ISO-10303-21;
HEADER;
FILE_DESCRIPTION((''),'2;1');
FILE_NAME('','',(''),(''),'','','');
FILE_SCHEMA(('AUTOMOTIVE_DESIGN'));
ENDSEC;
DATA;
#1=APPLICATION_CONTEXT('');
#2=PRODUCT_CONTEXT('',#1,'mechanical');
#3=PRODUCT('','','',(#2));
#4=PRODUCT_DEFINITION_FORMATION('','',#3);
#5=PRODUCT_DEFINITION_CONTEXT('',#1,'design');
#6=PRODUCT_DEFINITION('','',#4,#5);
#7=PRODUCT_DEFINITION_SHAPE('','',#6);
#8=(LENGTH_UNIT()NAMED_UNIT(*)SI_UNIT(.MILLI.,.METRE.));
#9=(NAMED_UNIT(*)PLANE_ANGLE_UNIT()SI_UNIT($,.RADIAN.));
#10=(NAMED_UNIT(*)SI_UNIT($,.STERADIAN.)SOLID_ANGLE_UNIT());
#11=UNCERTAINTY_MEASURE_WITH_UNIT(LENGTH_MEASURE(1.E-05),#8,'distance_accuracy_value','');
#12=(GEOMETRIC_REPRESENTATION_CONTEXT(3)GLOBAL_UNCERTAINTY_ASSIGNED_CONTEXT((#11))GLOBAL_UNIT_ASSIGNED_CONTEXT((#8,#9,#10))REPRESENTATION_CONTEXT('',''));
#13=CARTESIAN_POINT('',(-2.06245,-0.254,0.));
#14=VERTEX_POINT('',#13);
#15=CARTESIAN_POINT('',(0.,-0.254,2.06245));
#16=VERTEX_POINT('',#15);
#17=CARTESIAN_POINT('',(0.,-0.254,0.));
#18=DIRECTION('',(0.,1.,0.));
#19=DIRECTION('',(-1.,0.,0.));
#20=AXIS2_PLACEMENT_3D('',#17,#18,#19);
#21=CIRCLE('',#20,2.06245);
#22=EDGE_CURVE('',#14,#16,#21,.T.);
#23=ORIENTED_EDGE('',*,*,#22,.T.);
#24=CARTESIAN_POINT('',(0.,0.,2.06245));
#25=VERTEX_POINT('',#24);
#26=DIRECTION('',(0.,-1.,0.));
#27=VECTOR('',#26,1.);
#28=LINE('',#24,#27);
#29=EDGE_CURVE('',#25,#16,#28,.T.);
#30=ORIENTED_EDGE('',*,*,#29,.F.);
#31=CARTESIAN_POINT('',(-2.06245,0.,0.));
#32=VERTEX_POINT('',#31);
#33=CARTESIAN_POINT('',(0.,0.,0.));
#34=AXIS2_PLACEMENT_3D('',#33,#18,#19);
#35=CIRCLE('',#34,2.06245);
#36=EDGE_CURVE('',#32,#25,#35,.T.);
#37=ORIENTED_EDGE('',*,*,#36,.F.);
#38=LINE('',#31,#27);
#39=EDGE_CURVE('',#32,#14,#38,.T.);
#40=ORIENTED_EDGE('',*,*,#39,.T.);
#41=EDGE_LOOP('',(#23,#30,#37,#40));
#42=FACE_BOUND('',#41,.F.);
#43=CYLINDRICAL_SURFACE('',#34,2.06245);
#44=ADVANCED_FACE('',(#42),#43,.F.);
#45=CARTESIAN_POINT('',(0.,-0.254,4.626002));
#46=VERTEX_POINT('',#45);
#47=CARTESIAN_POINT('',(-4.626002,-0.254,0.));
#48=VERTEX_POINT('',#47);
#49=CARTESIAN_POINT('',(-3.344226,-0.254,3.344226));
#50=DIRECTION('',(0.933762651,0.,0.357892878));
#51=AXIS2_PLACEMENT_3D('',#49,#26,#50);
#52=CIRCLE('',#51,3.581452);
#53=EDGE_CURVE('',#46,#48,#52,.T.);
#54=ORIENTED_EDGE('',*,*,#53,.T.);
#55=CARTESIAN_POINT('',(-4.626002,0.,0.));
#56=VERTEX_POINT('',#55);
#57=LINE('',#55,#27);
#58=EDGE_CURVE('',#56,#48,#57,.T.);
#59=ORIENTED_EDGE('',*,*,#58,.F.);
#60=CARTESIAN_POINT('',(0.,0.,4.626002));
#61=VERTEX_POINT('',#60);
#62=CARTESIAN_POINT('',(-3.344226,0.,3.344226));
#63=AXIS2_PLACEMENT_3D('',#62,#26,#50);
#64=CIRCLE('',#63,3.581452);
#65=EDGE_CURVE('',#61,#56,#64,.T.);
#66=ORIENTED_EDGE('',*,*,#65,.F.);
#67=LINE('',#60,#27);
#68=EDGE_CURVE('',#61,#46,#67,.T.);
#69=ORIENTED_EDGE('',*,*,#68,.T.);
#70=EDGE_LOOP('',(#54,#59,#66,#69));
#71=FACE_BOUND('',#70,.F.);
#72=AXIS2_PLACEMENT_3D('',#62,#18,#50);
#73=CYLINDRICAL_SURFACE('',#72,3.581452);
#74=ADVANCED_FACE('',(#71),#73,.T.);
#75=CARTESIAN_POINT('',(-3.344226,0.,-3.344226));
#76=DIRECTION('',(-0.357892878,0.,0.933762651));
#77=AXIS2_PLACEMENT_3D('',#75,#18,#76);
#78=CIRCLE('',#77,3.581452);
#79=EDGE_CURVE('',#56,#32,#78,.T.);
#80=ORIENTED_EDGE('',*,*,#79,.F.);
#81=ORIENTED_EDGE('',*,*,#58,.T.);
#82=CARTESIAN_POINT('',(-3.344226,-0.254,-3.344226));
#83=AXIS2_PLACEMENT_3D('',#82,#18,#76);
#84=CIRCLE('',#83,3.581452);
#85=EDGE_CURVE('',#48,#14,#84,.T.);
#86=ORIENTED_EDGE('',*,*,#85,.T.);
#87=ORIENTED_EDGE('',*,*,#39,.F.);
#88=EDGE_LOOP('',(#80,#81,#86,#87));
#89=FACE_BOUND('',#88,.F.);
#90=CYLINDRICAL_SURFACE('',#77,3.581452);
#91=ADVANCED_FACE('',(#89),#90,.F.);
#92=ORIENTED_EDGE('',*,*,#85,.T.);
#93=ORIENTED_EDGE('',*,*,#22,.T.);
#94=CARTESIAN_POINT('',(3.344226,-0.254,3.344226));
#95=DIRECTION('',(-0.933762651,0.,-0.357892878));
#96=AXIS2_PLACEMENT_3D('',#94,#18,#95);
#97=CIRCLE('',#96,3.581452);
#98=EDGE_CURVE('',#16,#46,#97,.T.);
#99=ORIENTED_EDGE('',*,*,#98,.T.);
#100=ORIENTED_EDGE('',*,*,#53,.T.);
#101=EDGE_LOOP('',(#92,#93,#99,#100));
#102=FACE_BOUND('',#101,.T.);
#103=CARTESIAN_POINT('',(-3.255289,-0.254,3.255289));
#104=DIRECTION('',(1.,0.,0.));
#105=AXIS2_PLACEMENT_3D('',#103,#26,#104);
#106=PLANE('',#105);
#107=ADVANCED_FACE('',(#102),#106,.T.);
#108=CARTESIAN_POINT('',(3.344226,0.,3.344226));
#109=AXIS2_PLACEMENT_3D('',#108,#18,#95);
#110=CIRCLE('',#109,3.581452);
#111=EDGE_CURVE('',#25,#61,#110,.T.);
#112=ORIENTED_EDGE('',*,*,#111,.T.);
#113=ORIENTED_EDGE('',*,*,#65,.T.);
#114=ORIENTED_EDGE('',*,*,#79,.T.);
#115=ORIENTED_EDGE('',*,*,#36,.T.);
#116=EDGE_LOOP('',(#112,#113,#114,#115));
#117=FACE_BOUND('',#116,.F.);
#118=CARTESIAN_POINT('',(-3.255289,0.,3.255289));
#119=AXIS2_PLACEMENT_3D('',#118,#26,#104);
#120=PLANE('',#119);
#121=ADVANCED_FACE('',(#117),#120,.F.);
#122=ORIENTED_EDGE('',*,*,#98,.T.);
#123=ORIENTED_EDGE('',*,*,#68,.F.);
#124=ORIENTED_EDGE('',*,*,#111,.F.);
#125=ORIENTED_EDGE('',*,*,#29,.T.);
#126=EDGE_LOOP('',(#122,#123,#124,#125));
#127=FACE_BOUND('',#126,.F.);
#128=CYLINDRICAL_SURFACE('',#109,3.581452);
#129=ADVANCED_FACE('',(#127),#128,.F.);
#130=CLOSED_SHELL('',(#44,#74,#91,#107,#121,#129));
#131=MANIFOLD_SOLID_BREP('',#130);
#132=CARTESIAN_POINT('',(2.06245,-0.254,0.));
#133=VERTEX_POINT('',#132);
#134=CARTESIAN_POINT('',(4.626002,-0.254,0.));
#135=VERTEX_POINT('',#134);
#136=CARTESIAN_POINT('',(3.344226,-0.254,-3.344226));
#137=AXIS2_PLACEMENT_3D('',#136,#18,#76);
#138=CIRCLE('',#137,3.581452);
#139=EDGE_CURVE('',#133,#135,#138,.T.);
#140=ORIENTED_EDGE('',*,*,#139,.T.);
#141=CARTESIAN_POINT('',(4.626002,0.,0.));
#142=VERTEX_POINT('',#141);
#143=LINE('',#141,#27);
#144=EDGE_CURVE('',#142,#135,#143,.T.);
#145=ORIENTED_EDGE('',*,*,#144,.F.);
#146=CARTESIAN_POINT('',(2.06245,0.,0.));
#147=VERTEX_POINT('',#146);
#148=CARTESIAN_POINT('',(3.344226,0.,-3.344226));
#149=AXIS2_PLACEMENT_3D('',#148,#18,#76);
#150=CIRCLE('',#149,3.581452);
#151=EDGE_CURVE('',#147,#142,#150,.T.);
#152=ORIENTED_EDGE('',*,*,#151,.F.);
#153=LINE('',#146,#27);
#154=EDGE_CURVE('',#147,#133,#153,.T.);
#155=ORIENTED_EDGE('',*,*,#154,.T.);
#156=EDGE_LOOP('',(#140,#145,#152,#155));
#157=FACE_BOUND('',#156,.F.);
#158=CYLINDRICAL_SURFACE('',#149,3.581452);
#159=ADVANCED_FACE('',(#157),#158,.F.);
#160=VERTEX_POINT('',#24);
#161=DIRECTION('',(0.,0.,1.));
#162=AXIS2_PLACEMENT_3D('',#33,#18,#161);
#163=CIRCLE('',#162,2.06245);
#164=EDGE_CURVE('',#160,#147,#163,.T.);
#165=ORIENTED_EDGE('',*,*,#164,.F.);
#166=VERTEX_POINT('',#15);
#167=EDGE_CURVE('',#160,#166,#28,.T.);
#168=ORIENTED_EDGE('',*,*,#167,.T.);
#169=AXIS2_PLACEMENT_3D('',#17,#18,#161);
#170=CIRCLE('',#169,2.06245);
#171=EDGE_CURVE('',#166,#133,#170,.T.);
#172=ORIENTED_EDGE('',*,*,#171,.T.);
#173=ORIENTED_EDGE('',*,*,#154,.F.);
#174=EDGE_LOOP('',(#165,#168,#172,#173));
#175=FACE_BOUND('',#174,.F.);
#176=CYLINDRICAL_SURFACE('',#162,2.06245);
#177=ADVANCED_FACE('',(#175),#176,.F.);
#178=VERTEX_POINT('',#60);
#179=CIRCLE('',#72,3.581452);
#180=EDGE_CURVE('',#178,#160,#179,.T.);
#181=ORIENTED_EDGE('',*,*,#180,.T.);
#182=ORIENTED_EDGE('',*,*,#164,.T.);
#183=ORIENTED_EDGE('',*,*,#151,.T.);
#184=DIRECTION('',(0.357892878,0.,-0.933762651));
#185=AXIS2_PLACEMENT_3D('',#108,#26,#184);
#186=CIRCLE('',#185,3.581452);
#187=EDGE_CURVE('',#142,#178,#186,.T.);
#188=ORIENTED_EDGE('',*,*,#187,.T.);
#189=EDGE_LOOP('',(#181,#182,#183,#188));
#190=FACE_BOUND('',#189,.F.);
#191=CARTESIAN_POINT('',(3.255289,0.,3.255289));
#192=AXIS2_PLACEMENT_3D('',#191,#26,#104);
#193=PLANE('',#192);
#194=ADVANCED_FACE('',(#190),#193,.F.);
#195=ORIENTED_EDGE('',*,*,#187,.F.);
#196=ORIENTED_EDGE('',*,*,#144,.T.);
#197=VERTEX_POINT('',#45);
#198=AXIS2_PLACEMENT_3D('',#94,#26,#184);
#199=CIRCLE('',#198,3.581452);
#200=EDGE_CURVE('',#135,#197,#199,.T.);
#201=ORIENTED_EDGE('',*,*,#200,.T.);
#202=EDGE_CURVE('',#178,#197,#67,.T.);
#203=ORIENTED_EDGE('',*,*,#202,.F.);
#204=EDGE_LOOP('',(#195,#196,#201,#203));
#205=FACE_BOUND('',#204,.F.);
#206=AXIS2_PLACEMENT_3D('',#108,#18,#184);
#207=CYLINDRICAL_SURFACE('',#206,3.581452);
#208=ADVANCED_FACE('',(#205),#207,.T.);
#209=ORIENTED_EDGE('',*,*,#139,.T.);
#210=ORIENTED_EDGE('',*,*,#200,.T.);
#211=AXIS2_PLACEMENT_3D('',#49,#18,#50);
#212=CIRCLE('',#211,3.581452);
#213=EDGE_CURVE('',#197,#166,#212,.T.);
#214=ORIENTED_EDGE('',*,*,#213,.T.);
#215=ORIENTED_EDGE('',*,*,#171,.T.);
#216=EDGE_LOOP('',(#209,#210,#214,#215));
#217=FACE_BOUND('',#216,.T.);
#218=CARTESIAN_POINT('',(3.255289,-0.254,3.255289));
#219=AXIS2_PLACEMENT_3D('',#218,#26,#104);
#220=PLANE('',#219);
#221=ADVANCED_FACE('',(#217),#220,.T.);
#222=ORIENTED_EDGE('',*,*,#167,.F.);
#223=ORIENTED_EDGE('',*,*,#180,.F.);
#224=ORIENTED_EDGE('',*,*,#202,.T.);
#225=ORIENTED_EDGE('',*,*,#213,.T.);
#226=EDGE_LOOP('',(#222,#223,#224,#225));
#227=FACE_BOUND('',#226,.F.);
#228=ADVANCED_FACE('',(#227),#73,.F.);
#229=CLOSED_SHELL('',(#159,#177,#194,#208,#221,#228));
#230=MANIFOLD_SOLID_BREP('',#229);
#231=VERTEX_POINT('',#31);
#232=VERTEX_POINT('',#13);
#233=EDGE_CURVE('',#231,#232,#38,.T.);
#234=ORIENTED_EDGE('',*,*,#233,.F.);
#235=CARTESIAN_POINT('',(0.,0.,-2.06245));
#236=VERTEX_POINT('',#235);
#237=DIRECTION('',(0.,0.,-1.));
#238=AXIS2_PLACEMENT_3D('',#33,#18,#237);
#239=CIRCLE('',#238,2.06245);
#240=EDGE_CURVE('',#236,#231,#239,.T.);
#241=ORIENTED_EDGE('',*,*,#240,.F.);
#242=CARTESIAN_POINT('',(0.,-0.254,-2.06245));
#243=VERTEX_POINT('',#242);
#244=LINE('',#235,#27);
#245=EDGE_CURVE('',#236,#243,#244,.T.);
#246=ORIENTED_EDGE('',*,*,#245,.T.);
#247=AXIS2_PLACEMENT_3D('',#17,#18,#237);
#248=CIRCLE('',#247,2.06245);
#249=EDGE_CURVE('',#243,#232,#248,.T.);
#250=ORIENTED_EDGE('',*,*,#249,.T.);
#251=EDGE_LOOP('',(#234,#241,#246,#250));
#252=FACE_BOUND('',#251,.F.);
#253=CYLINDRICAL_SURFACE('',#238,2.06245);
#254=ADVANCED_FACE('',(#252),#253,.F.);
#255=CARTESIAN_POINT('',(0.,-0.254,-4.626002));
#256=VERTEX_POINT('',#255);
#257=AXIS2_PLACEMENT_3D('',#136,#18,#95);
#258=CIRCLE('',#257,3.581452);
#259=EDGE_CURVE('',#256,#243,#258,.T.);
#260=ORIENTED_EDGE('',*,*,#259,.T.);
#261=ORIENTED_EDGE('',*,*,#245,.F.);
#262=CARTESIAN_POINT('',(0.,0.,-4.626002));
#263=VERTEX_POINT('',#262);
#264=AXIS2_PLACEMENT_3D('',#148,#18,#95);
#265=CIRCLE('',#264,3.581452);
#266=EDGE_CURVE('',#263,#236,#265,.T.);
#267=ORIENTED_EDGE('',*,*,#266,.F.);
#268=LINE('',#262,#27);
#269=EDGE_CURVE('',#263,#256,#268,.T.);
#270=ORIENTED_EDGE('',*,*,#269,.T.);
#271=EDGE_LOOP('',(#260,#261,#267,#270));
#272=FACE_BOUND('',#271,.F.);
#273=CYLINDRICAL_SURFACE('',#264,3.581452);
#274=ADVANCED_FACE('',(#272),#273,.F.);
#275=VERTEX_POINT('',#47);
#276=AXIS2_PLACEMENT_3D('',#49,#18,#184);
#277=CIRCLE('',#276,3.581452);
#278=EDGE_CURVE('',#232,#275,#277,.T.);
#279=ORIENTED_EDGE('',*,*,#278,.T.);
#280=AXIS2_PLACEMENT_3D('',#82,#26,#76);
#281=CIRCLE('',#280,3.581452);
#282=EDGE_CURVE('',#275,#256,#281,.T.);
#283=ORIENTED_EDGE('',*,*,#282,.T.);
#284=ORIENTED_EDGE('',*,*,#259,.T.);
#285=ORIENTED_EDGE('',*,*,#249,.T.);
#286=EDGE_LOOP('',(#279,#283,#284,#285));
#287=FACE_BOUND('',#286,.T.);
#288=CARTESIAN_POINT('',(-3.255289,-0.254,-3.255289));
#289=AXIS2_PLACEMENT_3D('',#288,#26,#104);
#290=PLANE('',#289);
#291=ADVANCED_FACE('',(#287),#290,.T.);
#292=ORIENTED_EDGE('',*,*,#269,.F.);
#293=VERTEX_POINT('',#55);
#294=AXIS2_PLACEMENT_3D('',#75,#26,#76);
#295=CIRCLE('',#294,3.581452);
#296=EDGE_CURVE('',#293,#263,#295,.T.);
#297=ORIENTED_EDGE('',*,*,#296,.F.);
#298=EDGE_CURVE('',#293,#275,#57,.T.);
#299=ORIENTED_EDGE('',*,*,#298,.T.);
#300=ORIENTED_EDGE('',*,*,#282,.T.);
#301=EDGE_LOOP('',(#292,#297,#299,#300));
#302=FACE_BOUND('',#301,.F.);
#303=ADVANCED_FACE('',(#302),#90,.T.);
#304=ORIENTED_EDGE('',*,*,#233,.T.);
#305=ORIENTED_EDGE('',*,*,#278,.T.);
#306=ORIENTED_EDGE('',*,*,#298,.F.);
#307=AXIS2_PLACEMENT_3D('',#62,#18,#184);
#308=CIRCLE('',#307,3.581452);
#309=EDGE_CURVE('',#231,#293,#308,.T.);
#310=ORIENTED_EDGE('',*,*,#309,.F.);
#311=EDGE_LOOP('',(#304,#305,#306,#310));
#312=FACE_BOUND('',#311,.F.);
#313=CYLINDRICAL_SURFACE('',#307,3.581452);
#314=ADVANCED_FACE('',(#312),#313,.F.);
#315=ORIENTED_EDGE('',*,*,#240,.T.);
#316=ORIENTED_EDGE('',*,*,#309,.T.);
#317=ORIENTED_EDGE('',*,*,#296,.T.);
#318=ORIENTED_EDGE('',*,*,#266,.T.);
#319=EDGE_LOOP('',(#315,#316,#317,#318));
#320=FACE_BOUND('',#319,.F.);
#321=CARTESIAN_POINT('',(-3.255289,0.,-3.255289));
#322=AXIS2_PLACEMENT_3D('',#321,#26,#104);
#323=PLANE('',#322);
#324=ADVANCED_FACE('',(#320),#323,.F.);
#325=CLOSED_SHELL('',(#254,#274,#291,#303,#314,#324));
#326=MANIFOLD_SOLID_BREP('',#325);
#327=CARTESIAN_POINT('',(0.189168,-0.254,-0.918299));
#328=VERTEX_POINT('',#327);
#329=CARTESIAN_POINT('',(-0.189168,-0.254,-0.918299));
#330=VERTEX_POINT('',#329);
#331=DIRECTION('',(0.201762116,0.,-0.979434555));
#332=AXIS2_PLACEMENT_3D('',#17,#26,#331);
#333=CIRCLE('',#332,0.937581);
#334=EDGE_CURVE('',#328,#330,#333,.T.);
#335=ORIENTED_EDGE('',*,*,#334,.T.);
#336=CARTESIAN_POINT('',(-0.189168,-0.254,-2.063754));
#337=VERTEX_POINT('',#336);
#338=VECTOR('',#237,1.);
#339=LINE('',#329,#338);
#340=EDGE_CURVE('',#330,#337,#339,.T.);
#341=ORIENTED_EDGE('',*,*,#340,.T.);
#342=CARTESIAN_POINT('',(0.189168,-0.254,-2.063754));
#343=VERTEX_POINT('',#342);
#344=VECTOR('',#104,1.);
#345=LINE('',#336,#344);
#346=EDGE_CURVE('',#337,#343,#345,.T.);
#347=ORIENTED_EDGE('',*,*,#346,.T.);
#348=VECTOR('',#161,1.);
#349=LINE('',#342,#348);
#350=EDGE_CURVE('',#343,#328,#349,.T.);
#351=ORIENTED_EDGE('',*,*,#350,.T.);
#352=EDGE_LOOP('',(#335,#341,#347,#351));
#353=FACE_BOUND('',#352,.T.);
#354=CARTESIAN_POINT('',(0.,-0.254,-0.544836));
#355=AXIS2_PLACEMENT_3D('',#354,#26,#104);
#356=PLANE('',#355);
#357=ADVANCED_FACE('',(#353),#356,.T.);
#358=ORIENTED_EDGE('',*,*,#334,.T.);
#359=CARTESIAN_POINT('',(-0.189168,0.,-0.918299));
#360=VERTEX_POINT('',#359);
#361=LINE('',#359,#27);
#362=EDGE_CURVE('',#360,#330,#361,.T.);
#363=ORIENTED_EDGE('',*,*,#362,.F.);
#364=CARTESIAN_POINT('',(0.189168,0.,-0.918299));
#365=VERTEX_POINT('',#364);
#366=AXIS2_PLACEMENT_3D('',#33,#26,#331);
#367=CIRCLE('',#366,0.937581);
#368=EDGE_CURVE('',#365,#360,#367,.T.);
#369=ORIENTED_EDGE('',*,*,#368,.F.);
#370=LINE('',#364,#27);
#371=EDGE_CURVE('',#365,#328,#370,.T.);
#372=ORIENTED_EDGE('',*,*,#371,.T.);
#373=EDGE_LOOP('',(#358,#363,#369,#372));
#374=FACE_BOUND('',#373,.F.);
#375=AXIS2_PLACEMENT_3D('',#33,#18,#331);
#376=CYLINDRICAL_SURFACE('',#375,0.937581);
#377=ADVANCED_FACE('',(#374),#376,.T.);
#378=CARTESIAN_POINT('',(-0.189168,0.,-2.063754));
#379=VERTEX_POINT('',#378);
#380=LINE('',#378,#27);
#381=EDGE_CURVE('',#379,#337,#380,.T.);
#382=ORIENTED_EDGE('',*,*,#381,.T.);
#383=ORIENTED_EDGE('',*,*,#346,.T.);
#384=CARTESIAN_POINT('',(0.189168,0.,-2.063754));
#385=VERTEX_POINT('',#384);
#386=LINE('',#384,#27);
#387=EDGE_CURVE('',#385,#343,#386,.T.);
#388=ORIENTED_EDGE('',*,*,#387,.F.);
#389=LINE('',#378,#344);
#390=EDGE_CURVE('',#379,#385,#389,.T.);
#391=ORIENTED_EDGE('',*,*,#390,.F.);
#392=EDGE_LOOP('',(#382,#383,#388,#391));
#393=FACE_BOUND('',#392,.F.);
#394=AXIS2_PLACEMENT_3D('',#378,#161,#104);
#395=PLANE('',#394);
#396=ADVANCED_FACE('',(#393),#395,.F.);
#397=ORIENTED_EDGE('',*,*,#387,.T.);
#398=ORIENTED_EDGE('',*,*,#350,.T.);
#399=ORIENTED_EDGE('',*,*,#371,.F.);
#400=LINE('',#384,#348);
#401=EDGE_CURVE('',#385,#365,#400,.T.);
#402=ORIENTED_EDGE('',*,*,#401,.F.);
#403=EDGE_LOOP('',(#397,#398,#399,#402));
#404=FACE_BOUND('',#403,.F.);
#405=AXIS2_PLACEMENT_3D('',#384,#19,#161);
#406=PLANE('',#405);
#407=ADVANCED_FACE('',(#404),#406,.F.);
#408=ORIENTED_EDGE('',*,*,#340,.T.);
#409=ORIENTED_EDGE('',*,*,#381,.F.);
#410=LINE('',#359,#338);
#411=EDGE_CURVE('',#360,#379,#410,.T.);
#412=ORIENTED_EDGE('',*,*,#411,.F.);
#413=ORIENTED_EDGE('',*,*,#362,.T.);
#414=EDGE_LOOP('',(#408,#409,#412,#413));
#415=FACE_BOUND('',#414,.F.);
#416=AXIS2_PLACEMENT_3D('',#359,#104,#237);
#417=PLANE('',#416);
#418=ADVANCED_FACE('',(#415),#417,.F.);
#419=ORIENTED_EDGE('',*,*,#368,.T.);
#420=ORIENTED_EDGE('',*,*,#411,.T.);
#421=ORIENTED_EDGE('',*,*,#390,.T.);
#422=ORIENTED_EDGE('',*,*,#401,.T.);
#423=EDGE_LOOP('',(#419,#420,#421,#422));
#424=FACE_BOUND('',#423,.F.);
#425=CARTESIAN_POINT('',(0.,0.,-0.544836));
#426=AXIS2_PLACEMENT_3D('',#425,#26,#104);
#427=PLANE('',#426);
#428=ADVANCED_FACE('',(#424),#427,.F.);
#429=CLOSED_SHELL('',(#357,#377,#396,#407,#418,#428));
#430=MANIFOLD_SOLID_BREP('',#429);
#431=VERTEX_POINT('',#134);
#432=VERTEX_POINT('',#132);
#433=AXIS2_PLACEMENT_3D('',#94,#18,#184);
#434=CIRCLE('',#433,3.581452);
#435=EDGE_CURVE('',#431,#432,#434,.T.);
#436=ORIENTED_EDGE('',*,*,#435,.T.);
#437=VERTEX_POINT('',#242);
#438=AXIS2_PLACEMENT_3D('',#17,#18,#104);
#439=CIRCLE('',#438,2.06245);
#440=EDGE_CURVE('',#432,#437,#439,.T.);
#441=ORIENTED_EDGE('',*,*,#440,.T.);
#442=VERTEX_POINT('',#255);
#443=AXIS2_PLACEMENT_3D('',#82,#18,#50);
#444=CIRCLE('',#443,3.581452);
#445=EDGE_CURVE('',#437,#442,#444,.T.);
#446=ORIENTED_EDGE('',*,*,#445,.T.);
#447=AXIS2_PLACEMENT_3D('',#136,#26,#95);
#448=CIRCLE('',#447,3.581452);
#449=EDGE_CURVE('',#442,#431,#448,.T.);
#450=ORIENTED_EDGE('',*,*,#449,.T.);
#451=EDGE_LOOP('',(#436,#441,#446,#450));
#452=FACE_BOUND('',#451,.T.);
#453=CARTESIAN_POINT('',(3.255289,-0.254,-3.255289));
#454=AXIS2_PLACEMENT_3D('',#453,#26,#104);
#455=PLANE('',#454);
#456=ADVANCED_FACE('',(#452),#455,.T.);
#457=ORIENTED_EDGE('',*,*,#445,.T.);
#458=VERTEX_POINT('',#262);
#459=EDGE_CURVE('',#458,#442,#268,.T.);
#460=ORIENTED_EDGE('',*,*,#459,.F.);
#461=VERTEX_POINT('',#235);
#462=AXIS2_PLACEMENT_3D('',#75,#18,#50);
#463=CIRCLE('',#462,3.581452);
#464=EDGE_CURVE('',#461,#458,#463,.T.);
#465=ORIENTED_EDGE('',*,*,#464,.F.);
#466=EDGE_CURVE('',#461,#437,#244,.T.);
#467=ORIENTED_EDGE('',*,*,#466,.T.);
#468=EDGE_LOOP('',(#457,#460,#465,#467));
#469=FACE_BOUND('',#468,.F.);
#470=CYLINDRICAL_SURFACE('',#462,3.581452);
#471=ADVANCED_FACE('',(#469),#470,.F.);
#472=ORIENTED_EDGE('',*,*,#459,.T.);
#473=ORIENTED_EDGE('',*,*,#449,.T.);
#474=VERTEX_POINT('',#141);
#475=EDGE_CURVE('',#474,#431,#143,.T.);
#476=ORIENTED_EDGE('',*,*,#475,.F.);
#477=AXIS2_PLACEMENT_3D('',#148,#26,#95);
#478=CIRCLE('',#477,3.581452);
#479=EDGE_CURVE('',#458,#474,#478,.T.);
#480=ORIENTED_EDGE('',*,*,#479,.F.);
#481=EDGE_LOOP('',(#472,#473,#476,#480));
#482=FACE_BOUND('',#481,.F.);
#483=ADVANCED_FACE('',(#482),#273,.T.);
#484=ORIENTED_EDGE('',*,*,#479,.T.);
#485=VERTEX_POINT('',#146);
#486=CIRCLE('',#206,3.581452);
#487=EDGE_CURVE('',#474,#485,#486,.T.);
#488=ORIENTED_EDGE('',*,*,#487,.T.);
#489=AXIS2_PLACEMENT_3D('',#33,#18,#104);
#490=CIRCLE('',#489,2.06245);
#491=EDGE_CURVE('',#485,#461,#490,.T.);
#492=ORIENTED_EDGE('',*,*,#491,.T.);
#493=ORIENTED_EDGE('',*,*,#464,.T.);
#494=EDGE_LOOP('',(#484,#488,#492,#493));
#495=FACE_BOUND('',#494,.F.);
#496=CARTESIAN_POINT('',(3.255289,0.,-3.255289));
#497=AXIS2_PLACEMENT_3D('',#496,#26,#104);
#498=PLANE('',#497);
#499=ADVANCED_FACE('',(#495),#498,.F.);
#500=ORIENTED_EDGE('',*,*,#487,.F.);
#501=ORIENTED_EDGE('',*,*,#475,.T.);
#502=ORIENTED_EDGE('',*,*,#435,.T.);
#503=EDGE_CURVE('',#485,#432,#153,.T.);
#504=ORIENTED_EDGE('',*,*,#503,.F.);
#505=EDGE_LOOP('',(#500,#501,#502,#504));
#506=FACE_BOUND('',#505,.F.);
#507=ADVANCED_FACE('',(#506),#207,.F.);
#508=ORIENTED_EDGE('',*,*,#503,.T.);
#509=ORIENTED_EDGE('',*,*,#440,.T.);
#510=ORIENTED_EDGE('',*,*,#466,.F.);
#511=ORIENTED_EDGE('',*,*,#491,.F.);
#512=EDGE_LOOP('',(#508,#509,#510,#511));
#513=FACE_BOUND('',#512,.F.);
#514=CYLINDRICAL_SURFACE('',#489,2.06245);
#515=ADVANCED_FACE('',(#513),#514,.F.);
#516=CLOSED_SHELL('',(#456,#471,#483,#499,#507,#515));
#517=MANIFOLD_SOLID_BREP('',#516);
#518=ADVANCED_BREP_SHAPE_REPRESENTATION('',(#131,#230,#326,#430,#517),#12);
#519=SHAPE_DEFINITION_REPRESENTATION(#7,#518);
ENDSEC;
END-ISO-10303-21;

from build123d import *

# Parameters (mm, degrees)
F1_DEPTH = 0.254
F3_DEPTH = 0.254


with BuildPart() as f1:
    # F0 (on Front) → F1 (new body)
    with BuildSketch(Plane.XZ):
        with BuildLine():
            ThreePointArc((4.6260023192, 0), (3.3442261435, -0.2372258893), (2.0624499678, 0))
            ThreePointArc((2.0624499678, 0), (1.4583723581, -1.4583723581), (0, -2.0624499678))
            ThreePointArc((0, -2.0624499678), (0.2372258893, -3.3442261435), (0, -4.6260023192))
            ThreePointArc((0, -4.6260023192), (5.8766951624, -5.8766951624), (4.6260023192, 0))
        make_face()
    extrude(amount=F1_DEPTH)


with BuildPart() as f1b:
    # F0 (on Front) → F1, piece 2 (new body)
    with BuildSketch(Plane.XZ):
        with BuildLine():
            ThreePointArc((0, 2.0624499678), (1.4583723581, 1.4583723581), (2.0624499678, 0))
            ThreePointArc((2.0624499678, 0), (3.3442261435, 0.2372258893), (4.6260023192, 0))
            ThreePointArc((4.6260023192, 0), (5.8766951624, 5.8766951624), (0, 4.6260023192))
            ThreePointArc((0, 4.6260023192), (0.2372258893, 3.3442261435), (0, 2.0624499678))
        make_face()
    extrude(amount=F1_DEPTH)


with BuildPart() as f1c:
    # F0 (on Front) → F1, piece 3 (new body)
    with BuildSketch(Plane.XZ):
        with BuildLine():
            ThreePointArc((-2.0624499678, 0), (-1.4583723581, 1.4583723581), (0, 2.0624499678))
            ThreePointArc((0, 2.0624499678), (-0.2372258893, 3.3442261435), (0, 4.6260023192))
            ThreePointArc((0, 4.6260023192), (-5.8766951624, 5.8766951624), (-4.6260023192, 0))
            ThreePointArc((-4.6260023192, 0), (-3.3442261435, 0.2372258893), (-2.0624499678, 0))
        make_face()
    extrude(amount=F1_DEPTH)


with BuildPart() as f1d:
    # F0 (on Front) → F1, piece 4 (new body)
    with BuildSketch(Plane.XZ):
        with BuildLine():
            ThreePointArc((0, -4.6260023192), (-0.2372258893, -3.3442261435), (0, -2.0624499678))
            ThreePointArc((0, -2.0624499678), (-1.4583723581, -1.4583723581), (-2.0624499678, 0))
            ThreePointArc((-2.0624499678, 0), (-3.3442261435, -0.2372258893), (-4.6260023192, 0))
            ThreePointArc((-4.6260023192, 0), (-5.8766951624, -5.8766951624), (0, -4.6260023192))
        make_face()
    extrude(amount=F1_DEPTH)


with BuildPart() as f3:
    # F2 (on Front) → F3 (new body)
    with BuildSketch(Plane.XZ):
        with BuildLine():
            Line((0.1891683727, -2.0637542475), (0.1891683727, -0.918299452))
            ThreePointArc((0.1891683727, -0.918299452), (0, 0.9375812268), (-0.1891683727, -0.918299452))
            Line((-0.1891683727, -0.918299452), (-0.1891683727, -2.0637542475))
            Line((-0.1891683727, -2.0637542475), (0.1891683727, -2.0637542475))
        make_face()
    extrude(amount=F3_DEPTH)


solid = Compound([f1.part, f1b.part, f1c.part, f1d.part, f3.part])
